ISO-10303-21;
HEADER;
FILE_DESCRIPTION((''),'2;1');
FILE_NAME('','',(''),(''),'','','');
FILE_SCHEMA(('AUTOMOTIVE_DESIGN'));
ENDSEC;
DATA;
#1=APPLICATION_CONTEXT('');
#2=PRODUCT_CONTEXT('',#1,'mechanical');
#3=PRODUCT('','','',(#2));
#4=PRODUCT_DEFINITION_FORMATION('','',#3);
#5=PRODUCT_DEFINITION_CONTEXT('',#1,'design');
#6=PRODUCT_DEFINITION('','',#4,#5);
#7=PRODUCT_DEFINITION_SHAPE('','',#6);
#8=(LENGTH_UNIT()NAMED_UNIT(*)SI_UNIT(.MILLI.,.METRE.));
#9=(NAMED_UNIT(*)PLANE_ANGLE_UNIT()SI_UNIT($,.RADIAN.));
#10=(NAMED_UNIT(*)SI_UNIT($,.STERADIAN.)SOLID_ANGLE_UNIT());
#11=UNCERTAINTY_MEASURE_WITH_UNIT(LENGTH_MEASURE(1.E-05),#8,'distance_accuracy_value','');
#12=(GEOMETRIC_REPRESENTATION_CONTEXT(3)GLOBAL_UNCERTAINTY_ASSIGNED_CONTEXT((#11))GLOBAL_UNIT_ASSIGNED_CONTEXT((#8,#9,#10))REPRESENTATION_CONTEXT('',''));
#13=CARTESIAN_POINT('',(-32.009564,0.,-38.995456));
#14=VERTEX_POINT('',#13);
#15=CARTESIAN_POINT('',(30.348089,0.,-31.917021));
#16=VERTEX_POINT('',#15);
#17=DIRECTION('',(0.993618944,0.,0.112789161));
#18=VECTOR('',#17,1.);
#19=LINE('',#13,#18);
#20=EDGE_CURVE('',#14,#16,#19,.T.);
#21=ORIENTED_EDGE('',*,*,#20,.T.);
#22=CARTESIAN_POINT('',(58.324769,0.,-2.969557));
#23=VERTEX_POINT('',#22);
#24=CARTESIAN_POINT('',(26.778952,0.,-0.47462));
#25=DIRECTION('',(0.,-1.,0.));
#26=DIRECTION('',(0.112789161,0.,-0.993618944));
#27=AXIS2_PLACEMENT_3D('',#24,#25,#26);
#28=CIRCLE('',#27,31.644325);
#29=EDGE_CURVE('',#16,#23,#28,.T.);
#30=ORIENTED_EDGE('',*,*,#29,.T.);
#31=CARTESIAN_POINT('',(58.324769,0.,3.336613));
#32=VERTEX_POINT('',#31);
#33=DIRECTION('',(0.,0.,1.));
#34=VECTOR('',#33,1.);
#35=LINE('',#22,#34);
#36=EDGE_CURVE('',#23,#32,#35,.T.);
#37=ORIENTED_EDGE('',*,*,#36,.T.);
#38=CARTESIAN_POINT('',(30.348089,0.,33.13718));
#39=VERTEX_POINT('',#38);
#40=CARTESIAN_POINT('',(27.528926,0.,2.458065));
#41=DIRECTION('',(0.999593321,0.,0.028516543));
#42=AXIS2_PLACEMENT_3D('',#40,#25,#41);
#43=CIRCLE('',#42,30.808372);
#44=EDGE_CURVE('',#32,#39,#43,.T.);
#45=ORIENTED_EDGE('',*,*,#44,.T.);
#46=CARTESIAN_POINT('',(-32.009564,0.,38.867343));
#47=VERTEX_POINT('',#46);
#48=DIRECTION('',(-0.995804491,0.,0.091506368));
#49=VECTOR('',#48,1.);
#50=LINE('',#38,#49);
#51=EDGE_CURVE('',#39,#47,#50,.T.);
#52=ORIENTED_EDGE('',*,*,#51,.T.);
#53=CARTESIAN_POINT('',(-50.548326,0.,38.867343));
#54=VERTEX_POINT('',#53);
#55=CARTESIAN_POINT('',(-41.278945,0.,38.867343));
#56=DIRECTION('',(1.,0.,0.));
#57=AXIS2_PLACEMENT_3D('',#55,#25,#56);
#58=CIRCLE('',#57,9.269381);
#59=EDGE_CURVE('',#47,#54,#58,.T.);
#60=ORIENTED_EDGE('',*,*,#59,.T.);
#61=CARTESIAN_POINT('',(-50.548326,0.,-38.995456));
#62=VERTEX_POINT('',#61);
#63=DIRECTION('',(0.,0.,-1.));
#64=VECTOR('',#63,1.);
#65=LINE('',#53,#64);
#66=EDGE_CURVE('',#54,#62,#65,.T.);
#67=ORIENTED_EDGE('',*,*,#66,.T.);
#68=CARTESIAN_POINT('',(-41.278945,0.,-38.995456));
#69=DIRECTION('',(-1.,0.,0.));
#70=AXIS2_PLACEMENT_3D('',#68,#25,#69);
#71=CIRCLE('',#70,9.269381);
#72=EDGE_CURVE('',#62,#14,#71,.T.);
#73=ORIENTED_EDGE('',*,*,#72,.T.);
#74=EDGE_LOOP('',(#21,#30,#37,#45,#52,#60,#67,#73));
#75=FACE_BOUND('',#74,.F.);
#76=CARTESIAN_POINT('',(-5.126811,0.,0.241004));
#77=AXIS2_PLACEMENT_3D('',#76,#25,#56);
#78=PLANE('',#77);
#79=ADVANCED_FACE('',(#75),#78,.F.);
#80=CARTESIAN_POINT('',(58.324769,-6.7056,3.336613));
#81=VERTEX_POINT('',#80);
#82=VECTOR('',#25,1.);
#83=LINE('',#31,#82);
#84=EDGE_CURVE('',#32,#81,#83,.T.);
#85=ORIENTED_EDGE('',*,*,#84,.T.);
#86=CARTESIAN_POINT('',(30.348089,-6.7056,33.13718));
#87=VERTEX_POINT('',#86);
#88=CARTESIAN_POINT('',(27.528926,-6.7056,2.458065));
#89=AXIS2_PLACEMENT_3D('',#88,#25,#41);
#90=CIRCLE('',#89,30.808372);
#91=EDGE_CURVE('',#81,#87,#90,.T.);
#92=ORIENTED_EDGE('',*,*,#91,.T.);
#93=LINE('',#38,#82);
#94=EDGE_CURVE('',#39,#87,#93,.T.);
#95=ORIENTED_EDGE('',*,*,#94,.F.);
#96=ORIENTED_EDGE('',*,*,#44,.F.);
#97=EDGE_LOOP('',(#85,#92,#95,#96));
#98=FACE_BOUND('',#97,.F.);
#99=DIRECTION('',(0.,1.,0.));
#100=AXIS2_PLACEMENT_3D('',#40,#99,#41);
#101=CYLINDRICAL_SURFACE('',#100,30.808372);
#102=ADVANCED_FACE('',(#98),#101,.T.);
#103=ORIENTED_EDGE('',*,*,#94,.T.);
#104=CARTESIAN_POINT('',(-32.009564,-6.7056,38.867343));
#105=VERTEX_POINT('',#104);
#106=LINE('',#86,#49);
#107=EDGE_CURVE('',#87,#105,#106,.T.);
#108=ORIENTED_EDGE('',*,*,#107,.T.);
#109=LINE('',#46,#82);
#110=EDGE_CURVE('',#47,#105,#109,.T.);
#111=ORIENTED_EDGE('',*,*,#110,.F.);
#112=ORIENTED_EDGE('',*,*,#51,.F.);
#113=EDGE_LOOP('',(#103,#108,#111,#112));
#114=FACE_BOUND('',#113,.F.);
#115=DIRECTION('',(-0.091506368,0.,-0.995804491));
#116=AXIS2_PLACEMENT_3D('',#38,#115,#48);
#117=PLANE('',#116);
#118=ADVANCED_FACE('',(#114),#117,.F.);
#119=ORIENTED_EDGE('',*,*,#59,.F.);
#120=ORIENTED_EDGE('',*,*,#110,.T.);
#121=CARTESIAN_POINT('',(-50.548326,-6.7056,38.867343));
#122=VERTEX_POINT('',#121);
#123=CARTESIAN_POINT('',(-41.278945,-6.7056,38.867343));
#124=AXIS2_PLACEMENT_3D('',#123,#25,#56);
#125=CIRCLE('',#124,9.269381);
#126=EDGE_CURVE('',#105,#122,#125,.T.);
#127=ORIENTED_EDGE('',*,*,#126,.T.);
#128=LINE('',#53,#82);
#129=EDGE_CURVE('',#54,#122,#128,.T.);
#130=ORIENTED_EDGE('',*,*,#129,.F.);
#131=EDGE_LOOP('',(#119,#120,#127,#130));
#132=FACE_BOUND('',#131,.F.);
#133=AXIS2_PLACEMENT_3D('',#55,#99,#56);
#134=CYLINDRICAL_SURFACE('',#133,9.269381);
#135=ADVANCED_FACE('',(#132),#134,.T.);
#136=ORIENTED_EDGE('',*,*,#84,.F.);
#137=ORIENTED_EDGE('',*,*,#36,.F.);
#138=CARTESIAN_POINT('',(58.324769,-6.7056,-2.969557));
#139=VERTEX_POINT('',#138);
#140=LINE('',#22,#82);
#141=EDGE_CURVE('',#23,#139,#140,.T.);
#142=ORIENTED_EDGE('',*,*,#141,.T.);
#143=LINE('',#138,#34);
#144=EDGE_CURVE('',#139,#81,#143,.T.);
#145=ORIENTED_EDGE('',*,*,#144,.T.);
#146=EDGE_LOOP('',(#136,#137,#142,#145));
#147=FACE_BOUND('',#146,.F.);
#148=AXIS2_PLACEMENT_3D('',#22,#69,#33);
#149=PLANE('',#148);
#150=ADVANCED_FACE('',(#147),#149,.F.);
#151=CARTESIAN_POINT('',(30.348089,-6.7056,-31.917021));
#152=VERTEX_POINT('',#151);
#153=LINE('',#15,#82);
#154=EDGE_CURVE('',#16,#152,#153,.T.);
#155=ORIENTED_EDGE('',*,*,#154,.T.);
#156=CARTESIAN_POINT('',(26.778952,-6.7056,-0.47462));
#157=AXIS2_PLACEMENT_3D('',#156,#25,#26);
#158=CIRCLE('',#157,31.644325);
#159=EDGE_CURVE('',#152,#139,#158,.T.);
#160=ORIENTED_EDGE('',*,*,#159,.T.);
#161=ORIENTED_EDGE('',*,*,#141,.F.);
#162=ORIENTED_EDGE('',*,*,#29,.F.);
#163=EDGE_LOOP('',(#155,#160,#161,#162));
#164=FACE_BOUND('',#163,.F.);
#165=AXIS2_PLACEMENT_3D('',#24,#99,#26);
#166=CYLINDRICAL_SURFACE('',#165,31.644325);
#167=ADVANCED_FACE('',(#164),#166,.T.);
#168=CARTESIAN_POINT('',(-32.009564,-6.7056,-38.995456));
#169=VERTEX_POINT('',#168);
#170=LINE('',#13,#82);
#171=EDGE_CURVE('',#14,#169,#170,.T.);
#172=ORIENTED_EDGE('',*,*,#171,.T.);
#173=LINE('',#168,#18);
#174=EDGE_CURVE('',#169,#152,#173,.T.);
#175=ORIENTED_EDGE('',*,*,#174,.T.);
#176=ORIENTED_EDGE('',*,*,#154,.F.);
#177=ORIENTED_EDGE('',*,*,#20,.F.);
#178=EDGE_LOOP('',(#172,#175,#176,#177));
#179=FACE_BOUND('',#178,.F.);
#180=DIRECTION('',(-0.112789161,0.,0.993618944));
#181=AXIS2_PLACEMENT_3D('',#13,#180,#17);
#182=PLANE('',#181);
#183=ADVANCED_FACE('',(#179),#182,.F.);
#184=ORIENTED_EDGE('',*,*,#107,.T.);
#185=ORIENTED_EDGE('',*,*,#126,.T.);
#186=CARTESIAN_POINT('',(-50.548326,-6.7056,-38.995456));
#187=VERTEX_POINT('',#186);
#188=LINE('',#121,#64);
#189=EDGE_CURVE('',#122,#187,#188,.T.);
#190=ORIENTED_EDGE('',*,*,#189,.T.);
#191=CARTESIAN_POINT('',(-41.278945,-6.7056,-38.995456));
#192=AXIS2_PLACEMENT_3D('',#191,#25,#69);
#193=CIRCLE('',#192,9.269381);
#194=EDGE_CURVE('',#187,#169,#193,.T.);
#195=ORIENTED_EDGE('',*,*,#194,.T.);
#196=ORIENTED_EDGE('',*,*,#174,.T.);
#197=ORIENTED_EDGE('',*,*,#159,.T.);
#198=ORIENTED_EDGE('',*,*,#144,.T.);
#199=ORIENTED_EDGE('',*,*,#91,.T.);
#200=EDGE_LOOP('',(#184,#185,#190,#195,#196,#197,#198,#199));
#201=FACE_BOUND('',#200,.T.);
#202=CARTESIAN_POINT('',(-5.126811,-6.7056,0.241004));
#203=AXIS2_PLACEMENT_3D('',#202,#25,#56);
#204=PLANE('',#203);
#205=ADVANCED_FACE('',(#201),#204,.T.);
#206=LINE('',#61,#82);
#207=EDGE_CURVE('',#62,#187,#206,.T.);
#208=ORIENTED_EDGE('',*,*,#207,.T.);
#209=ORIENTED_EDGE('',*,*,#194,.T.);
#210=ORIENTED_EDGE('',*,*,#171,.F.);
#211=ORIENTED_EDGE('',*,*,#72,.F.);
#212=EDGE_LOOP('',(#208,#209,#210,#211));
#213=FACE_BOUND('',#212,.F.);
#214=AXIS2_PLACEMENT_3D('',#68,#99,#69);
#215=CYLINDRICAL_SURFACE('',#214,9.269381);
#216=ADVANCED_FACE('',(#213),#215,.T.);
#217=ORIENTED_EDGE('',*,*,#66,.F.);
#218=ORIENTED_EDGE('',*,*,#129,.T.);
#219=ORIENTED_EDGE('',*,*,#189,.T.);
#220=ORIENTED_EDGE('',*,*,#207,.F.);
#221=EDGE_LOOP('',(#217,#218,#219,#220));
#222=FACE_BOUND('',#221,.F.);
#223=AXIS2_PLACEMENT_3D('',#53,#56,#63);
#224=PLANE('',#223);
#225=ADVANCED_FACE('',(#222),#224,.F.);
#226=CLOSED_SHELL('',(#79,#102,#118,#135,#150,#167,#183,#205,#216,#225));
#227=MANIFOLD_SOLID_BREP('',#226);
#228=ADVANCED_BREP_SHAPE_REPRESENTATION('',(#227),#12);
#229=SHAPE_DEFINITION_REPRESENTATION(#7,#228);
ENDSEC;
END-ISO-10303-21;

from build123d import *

# Parameters (mm, degrees)
F1_DEPTH = 6.7056


# Not quite as in the source:
# - the program builds the solid bodies; features that only make, move or delete a surface that nothing else refers to are left out


with BuildPart() as f1:
    # F0 (on Front) → F1 (new body)
    with BuildSketch(Plane.XZ):
        with BuildLine():
            ThreePointArc((-32.0095643401, 38.8673432171), (-41.2789452821, 48.1367241591), (-50.5483262241, 38.8673432171))
            Line((-50.5483262241, 38.8673432171), (-50.5483262241, -38.9954559505))
            ThreePointArc((-50.5483262241, -38.9954559505), (-41.2789452821, -48.2648368925), (-32.0095643401, -38.9954559505))
            Line((-32.0095643401, -38.9954559505), (30.3480885923, -31.9170206785))
            ThreePointArc((30.3480885923, -31.9170206785), (49.5331583117, -22.4657405577), (58.3247691393, -2.9695569538))
            Line((58.3247691393, -2.9695569538), (58.3247691393, 3.3366130665))
            ThreePointArc((58.3247691393, 3.3366130665), (49.99023947, 23.5446765042), (30.3480885923, 33.1371799111))
            Line((30.3480885923, 33.1371799111), (-32.0095643401, 38.8673432171))
        make_face()
    extrude(amount=F1_DEPTH)


solid = f1.part
